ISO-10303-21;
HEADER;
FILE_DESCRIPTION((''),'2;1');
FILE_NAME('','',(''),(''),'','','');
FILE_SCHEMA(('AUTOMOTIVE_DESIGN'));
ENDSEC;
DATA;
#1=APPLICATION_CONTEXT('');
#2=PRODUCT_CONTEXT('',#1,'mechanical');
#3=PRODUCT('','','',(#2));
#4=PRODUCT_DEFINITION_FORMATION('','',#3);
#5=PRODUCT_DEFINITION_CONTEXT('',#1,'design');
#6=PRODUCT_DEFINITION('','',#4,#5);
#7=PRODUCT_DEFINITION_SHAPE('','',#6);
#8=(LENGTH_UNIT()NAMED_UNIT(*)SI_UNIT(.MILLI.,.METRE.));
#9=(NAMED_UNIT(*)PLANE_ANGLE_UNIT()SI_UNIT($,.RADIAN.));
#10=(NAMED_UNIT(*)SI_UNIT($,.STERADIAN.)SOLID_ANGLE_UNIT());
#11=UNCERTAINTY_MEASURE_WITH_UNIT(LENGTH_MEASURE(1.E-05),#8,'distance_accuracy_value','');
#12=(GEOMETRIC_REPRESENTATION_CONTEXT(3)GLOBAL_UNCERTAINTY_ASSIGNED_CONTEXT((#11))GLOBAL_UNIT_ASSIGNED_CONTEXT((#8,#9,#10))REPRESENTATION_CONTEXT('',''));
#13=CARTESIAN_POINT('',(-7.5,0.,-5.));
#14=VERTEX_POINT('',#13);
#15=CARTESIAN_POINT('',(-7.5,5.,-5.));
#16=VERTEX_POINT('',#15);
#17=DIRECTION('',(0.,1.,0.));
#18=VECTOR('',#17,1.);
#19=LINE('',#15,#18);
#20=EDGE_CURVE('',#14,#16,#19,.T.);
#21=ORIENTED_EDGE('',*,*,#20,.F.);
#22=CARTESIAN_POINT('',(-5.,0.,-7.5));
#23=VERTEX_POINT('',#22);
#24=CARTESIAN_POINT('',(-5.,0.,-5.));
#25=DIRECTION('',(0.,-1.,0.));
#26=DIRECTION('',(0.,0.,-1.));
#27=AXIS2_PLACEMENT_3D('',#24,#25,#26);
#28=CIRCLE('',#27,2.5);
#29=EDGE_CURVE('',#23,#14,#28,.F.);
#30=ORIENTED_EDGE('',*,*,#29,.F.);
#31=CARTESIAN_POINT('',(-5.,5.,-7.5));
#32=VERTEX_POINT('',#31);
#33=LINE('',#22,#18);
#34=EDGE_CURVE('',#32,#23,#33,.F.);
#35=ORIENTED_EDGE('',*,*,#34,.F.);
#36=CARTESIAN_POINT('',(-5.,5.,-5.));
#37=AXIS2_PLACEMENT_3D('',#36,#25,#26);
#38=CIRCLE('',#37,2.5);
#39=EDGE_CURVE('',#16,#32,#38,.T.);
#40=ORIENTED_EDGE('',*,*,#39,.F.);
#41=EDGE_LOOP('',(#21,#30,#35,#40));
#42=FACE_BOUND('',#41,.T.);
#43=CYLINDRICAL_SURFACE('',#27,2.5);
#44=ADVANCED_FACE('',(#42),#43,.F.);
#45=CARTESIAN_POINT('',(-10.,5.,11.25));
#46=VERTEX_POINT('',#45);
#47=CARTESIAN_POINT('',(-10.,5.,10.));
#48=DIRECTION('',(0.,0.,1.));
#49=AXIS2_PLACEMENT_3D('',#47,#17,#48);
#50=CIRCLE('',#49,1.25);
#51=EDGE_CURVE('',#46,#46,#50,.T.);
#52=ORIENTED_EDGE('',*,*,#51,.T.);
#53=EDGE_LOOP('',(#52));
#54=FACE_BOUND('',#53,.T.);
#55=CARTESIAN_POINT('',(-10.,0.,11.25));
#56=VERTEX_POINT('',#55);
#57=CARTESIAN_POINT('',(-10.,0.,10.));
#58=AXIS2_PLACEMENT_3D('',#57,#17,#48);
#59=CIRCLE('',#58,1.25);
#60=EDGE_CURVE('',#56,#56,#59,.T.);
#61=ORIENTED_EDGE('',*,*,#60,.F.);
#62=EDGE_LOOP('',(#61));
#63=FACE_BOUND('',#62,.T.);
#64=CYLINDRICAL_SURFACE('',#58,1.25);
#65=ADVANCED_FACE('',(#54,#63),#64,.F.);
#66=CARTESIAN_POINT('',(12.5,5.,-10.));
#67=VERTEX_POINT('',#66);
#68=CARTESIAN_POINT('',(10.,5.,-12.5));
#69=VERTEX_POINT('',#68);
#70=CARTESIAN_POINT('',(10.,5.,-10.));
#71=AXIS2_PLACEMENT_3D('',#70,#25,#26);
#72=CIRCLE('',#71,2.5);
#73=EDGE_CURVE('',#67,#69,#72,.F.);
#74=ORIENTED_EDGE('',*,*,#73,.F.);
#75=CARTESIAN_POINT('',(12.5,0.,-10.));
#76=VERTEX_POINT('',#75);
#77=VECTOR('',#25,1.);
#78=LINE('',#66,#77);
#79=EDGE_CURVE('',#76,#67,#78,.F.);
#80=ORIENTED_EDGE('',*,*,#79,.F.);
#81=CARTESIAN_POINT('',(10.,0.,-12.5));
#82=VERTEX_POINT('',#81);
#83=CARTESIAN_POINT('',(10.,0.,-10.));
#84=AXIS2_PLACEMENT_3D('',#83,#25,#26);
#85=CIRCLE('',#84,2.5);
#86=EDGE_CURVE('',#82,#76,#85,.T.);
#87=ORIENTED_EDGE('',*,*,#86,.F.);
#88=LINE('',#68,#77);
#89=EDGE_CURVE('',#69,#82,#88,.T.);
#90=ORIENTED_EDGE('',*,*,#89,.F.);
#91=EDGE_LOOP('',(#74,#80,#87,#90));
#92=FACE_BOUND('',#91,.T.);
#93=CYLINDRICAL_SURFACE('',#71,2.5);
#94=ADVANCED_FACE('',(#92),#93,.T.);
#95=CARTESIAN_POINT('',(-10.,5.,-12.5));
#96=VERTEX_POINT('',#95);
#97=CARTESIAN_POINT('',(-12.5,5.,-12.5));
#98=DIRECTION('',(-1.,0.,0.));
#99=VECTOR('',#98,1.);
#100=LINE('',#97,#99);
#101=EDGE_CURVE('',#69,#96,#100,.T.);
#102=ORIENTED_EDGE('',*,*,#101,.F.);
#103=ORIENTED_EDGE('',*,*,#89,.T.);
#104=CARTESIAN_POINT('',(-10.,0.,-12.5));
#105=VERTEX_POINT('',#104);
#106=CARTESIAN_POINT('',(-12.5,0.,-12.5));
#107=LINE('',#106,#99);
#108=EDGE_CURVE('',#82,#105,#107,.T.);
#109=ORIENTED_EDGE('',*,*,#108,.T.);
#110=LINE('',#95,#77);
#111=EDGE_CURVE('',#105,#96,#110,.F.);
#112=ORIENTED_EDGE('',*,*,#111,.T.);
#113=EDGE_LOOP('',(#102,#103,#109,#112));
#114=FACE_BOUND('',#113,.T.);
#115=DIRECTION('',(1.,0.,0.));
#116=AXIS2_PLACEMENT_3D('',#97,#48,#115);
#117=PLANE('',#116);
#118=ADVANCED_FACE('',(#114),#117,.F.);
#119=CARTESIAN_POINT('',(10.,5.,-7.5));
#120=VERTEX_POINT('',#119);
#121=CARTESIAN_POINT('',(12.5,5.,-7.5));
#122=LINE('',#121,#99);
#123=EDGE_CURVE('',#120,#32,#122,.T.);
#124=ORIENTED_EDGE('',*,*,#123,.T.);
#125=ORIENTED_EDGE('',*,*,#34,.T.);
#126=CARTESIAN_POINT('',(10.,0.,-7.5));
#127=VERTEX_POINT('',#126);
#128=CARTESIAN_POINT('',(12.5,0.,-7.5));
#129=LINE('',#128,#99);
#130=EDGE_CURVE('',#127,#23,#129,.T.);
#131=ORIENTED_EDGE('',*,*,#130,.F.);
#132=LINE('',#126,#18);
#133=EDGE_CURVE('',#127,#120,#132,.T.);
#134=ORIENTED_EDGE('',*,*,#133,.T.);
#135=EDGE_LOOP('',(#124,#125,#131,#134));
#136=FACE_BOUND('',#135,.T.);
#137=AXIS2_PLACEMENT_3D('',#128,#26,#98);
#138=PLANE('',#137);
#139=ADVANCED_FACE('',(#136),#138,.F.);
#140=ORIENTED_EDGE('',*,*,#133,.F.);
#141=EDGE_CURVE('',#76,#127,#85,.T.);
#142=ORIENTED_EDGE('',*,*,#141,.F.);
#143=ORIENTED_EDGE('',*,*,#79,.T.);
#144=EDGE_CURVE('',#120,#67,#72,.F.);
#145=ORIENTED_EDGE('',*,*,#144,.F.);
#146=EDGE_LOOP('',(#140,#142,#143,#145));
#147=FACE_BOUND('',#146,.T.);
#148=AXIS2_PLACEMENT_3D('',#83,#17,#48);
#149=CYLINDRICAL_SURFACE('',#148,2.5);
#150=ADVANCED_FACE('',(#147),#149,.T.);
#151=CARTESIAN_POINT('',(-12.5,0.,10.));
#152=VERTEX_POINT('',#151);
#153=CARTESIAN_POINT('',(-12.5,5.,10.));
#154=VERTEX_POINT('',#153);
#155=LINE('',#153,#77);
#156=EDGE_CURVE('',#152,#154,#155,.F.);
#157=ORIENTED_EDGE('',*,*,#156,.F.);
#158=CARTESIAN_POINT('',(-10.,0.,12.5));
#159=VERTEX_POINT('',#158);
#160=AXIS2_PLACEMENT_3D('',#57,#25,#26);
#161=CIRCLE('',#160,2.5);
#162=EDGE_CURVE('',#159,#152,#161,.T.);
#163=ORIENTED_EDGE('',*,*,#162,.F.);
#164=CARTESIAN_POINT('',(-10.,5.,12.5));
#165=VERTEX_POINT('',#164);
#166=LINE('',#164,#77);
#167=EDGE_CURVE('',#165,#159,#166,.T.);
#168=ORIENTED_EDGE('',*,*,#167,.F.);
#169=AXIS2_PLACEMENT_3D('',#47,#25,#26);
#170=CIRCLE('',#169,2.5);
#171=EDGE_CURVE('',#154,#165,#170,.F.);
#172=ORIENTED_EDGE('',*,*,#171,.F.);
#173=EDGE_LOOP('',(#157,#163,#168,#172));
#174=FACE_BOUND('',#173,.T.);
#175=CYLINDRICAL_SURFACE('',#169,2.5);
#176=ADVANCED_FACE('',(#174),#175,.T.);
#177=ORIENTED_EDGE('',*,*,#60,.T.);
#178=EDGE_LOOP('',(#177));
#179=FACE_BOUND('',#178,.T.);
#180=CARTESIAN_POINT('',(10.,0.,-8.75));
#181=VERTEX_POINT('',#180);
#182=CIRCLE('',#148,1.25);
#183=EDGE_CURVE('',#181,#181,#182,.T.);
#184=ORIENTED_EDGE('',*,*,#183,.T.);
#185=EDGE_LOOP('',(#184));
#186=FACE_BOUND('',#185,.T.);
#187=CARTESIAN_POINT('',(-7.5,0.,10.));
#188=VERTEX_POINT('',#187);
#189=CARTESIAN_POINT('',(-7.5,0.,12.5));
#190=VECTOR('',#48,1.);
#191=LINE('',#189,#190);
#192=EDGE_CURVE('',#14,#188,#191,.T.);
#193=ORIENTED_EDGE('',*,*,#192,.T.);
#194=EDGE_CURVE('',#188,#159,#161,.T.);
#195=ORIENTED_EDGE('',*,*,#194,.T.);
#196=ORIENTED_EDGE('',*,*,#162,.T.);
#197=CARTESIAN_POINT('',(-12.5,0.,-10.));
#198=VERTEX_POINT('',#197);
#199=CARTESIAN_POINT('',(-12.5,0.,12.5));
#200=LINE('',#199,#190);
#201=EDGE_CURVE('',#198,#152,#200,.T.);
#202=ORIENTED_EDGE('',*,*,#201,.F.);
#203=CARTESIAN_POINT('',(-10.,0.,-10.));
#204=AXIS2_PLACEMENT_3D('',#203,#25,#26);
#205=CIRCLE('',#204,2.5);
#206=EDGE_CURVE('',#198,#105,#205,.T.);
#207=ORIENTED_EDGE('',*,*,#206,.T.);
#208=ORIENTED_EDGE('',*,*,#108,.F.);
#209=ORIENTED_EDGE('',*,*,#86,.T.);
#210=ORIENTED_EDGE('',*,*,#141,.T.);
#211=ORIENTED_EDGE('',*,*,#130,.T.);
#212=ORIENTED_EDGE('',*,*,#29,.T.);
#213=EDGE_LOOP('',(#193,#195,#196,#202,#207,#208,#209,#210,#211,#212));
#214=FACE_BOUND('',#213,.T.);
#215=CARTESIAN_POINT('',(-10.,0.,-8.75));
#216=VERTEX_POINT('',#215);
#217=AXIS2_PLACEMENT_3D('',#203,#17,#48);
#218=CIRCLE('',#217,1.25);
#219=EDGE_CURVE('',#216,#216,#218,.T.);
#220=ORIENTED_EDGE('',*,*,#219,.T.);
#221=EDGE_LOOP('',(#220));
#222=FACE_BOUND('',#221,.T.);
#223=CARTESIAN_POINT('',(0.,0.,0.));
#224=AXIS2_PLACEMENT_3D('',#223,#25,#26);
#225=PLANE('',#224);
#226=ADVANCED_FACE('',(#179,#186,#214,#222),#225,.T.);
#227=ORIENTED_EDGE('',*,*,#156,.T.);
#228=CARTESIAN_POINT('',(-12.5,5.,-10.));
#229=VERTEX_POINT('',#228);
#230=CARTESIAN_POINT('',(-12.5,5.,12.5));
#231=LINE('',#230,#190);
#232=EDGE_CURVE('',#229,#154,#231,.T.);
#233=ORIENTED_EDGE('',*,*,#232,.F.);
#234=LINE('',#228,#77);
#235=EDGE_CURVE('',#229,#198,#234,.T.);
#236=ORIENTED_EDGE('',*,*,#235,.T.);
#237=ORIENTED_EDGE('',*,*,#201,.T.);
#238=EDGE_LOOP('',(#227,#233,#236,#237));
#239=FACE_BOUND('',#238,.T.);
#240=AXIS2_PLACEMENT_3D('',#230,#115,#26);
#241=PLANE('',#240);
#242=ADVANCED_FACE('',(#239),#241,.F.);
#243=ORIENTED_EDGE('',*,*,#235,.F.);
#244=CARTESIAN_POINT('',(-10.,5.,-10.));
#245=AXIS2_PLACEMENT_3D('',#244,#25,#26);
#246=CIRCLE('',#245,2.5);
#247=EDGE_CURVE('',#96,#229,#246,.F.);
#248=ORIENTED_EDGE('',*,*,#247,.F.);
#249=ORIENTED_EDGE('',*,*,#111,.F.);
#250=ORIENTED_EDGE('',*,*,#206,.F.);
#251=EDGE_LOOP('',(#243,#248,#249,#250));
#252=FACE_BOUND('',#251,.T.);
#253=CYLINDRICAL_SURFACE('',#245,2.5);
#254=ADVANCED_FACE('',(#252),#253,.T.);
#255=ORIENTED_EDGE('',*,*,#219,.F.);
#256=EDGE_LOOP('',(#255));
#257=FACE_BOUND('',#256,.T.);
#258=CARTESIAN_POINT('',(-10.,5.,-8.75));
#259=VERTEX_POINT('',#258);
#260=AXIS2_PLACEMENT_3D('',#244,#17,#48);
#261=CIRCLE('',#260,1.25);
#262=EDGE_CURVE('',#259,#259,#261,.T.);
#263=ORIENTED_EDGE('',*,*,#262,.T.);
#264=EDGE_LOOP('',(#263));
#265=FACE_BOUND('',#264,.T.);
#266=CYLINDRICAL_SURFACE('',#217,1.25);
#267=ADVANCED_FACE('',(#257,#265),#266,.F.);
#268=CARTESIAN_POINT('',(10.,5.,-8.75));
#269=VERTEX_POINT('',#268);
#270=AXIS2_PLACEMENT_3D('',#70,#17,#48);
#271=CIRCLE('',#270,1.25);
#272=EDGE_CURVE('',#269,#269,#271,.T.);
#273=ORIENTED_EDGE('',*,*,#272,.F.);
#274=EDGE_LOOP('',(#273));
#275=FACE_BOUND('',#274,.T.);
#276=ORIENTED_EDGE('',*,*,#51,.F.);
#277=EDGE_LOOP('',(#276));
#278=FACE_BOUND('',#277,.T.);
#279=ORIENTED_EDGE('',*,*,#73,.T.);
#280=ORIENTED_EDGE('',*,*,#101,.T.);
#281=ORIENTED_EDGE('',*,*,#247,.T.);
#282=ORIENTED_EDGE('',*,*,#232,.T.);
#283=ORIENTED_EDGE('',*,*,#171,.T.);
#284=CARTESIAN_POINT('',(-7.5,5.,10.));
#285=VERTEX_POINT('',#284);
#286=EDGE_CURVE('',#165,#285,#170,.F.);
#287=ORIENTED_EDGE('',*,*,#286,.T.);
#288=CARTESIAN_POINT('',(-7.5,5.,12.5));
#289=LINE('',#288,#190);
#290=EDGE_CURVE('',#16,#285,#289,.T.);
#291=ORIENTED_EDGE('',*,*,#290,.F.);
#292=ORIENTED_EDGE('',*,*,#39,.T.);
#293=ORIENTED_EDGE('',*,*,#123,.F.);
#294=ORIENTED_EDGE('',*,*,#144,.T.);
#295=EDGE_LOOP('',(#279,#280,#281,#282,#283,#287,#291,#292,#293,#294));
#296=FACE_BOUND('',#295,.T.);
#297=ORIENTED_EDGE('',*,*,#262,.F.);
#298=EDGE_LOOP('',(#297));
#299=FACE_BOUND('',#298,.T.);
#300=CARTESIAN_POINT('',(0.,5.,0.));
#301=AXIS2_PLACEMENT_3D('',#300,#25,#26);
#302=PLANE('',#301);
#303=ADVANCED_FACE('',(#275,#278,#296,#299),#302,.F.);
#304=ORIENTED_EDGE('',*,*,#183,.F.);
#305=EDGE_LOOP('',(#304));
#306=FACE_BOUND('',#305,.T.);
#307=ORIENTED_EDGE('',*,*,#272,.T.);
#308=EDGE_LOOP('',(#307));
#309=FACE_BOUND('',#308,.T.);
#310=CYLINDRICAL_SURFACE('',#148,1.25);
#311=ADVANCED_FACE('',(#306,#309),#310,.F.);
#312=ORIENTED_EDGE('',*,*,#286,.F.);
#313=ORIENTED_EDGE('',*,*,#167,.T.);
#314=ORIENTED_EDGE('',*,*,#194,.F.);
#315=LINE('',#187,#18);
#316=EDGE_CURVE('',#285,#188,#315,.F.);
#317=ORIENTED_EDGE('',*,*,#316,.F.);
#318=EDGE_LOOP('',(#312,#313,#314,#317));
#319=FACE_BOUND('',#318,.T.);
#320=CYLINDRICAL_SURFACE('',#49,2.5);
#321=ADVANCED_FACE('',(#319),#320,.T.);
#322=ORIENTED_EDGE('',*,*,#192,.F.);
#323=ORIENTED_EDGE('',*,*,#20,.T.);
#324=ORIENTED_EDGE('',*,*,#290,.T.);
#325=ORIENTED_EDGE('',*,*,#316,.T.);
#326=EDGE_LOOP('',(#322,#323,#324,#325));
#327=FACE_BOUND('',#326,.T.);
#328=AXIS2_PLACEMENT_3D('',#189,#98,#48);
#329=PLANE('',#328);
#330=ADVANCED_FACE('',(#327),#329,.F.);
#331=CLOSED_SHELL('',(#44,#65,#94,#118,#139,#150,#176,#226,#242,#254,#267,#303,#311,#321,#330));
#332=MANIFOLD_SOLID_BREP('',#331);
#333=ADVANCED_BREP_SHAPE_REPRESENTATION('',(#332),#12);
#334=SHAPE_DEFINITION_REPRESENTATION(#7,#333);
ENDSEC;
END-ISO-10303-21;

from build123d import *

# Parameters (mm, degrees)
SKETCH1_W           = 25
SKETCH1_H           = 25
BOSS_EXTRUDE1_DEPTH = 5
SKETCH3_R           = 1.25
CUT_EXTRUDE1_DEPTH  = 19.371173071
SKETCH4_W           = 20
SKETCH4_H           = 20
CUT_EXTRUDE2_DEPTH  = 19.371173071
FILLET1_R           = 2.5


with BuildPart() as part:
    # Sketch1 → Boss-Extrude1 (new body)
    with BuildSketch(Plane(origin=(0, 0, 0), x_dir=(1, 0, 0), z_dir=(0, 1, 0))):
        Rectangle(SKETCH1_W, SKETCH1_H)
    extrude(amount=BOSS_EXTRUDE1_DEPTH)

    # Sketch3 → Cut-Extrude1 (cut, through all)
    with BuildSketch(Plane(origin=(0, 5, 0), x_dir=(1, 0, 0), z_dir=(0, 1, 0))):
        with Locations(Location((-10, 10, 0), (0, 0, 270))):
            Circle(SKETCH3_R)
        with Locations(Location((10, 10, 0), (0, 0, 270))):
            Circle(SKETCH3_R)
        with Locations(Location((-10, -10, 0), (0, 0, 270))):
            Circle(SKETCH3_R)
    extrude(amount=-CUT_EXTRUDE1_DEPTH, mode=Mode.SUBTRACT)

    # Sketch4 → Cut-Extrude2 (cut, through all)
    with BuildSketch(Plane(origin=(0, 5, 0), x_dir=(1, 0, 0), z_dir=(0, 1, 0))):
        with Locations((2.5, -2.5)):
            Rectangle(SKETCH4_W, SKETCH4_H)
    extrude(amount=-CUT_EXTRUDE2_DEPTH, mode=Mode.SUBTRACT)

    # Fillet1
    fillet1_edges = [part.edges().sort_by_distance(p)[0] for p in [
        (-12.5, 2.5, 12.5),
        (12.5, 2.5, -12.5),
        (-12.5, 2.5, -12.5),
        (12.5, 2.5, -7.5),
        (-7.5, 2.5, 12.5),
        (-7.5, 2.5, -7.5),
    ]]
    fillet(fillet1_edges, radius=FILLET1_R - 0.0001)  # a hair under: the kernel refuses the full size


solid = part.part
